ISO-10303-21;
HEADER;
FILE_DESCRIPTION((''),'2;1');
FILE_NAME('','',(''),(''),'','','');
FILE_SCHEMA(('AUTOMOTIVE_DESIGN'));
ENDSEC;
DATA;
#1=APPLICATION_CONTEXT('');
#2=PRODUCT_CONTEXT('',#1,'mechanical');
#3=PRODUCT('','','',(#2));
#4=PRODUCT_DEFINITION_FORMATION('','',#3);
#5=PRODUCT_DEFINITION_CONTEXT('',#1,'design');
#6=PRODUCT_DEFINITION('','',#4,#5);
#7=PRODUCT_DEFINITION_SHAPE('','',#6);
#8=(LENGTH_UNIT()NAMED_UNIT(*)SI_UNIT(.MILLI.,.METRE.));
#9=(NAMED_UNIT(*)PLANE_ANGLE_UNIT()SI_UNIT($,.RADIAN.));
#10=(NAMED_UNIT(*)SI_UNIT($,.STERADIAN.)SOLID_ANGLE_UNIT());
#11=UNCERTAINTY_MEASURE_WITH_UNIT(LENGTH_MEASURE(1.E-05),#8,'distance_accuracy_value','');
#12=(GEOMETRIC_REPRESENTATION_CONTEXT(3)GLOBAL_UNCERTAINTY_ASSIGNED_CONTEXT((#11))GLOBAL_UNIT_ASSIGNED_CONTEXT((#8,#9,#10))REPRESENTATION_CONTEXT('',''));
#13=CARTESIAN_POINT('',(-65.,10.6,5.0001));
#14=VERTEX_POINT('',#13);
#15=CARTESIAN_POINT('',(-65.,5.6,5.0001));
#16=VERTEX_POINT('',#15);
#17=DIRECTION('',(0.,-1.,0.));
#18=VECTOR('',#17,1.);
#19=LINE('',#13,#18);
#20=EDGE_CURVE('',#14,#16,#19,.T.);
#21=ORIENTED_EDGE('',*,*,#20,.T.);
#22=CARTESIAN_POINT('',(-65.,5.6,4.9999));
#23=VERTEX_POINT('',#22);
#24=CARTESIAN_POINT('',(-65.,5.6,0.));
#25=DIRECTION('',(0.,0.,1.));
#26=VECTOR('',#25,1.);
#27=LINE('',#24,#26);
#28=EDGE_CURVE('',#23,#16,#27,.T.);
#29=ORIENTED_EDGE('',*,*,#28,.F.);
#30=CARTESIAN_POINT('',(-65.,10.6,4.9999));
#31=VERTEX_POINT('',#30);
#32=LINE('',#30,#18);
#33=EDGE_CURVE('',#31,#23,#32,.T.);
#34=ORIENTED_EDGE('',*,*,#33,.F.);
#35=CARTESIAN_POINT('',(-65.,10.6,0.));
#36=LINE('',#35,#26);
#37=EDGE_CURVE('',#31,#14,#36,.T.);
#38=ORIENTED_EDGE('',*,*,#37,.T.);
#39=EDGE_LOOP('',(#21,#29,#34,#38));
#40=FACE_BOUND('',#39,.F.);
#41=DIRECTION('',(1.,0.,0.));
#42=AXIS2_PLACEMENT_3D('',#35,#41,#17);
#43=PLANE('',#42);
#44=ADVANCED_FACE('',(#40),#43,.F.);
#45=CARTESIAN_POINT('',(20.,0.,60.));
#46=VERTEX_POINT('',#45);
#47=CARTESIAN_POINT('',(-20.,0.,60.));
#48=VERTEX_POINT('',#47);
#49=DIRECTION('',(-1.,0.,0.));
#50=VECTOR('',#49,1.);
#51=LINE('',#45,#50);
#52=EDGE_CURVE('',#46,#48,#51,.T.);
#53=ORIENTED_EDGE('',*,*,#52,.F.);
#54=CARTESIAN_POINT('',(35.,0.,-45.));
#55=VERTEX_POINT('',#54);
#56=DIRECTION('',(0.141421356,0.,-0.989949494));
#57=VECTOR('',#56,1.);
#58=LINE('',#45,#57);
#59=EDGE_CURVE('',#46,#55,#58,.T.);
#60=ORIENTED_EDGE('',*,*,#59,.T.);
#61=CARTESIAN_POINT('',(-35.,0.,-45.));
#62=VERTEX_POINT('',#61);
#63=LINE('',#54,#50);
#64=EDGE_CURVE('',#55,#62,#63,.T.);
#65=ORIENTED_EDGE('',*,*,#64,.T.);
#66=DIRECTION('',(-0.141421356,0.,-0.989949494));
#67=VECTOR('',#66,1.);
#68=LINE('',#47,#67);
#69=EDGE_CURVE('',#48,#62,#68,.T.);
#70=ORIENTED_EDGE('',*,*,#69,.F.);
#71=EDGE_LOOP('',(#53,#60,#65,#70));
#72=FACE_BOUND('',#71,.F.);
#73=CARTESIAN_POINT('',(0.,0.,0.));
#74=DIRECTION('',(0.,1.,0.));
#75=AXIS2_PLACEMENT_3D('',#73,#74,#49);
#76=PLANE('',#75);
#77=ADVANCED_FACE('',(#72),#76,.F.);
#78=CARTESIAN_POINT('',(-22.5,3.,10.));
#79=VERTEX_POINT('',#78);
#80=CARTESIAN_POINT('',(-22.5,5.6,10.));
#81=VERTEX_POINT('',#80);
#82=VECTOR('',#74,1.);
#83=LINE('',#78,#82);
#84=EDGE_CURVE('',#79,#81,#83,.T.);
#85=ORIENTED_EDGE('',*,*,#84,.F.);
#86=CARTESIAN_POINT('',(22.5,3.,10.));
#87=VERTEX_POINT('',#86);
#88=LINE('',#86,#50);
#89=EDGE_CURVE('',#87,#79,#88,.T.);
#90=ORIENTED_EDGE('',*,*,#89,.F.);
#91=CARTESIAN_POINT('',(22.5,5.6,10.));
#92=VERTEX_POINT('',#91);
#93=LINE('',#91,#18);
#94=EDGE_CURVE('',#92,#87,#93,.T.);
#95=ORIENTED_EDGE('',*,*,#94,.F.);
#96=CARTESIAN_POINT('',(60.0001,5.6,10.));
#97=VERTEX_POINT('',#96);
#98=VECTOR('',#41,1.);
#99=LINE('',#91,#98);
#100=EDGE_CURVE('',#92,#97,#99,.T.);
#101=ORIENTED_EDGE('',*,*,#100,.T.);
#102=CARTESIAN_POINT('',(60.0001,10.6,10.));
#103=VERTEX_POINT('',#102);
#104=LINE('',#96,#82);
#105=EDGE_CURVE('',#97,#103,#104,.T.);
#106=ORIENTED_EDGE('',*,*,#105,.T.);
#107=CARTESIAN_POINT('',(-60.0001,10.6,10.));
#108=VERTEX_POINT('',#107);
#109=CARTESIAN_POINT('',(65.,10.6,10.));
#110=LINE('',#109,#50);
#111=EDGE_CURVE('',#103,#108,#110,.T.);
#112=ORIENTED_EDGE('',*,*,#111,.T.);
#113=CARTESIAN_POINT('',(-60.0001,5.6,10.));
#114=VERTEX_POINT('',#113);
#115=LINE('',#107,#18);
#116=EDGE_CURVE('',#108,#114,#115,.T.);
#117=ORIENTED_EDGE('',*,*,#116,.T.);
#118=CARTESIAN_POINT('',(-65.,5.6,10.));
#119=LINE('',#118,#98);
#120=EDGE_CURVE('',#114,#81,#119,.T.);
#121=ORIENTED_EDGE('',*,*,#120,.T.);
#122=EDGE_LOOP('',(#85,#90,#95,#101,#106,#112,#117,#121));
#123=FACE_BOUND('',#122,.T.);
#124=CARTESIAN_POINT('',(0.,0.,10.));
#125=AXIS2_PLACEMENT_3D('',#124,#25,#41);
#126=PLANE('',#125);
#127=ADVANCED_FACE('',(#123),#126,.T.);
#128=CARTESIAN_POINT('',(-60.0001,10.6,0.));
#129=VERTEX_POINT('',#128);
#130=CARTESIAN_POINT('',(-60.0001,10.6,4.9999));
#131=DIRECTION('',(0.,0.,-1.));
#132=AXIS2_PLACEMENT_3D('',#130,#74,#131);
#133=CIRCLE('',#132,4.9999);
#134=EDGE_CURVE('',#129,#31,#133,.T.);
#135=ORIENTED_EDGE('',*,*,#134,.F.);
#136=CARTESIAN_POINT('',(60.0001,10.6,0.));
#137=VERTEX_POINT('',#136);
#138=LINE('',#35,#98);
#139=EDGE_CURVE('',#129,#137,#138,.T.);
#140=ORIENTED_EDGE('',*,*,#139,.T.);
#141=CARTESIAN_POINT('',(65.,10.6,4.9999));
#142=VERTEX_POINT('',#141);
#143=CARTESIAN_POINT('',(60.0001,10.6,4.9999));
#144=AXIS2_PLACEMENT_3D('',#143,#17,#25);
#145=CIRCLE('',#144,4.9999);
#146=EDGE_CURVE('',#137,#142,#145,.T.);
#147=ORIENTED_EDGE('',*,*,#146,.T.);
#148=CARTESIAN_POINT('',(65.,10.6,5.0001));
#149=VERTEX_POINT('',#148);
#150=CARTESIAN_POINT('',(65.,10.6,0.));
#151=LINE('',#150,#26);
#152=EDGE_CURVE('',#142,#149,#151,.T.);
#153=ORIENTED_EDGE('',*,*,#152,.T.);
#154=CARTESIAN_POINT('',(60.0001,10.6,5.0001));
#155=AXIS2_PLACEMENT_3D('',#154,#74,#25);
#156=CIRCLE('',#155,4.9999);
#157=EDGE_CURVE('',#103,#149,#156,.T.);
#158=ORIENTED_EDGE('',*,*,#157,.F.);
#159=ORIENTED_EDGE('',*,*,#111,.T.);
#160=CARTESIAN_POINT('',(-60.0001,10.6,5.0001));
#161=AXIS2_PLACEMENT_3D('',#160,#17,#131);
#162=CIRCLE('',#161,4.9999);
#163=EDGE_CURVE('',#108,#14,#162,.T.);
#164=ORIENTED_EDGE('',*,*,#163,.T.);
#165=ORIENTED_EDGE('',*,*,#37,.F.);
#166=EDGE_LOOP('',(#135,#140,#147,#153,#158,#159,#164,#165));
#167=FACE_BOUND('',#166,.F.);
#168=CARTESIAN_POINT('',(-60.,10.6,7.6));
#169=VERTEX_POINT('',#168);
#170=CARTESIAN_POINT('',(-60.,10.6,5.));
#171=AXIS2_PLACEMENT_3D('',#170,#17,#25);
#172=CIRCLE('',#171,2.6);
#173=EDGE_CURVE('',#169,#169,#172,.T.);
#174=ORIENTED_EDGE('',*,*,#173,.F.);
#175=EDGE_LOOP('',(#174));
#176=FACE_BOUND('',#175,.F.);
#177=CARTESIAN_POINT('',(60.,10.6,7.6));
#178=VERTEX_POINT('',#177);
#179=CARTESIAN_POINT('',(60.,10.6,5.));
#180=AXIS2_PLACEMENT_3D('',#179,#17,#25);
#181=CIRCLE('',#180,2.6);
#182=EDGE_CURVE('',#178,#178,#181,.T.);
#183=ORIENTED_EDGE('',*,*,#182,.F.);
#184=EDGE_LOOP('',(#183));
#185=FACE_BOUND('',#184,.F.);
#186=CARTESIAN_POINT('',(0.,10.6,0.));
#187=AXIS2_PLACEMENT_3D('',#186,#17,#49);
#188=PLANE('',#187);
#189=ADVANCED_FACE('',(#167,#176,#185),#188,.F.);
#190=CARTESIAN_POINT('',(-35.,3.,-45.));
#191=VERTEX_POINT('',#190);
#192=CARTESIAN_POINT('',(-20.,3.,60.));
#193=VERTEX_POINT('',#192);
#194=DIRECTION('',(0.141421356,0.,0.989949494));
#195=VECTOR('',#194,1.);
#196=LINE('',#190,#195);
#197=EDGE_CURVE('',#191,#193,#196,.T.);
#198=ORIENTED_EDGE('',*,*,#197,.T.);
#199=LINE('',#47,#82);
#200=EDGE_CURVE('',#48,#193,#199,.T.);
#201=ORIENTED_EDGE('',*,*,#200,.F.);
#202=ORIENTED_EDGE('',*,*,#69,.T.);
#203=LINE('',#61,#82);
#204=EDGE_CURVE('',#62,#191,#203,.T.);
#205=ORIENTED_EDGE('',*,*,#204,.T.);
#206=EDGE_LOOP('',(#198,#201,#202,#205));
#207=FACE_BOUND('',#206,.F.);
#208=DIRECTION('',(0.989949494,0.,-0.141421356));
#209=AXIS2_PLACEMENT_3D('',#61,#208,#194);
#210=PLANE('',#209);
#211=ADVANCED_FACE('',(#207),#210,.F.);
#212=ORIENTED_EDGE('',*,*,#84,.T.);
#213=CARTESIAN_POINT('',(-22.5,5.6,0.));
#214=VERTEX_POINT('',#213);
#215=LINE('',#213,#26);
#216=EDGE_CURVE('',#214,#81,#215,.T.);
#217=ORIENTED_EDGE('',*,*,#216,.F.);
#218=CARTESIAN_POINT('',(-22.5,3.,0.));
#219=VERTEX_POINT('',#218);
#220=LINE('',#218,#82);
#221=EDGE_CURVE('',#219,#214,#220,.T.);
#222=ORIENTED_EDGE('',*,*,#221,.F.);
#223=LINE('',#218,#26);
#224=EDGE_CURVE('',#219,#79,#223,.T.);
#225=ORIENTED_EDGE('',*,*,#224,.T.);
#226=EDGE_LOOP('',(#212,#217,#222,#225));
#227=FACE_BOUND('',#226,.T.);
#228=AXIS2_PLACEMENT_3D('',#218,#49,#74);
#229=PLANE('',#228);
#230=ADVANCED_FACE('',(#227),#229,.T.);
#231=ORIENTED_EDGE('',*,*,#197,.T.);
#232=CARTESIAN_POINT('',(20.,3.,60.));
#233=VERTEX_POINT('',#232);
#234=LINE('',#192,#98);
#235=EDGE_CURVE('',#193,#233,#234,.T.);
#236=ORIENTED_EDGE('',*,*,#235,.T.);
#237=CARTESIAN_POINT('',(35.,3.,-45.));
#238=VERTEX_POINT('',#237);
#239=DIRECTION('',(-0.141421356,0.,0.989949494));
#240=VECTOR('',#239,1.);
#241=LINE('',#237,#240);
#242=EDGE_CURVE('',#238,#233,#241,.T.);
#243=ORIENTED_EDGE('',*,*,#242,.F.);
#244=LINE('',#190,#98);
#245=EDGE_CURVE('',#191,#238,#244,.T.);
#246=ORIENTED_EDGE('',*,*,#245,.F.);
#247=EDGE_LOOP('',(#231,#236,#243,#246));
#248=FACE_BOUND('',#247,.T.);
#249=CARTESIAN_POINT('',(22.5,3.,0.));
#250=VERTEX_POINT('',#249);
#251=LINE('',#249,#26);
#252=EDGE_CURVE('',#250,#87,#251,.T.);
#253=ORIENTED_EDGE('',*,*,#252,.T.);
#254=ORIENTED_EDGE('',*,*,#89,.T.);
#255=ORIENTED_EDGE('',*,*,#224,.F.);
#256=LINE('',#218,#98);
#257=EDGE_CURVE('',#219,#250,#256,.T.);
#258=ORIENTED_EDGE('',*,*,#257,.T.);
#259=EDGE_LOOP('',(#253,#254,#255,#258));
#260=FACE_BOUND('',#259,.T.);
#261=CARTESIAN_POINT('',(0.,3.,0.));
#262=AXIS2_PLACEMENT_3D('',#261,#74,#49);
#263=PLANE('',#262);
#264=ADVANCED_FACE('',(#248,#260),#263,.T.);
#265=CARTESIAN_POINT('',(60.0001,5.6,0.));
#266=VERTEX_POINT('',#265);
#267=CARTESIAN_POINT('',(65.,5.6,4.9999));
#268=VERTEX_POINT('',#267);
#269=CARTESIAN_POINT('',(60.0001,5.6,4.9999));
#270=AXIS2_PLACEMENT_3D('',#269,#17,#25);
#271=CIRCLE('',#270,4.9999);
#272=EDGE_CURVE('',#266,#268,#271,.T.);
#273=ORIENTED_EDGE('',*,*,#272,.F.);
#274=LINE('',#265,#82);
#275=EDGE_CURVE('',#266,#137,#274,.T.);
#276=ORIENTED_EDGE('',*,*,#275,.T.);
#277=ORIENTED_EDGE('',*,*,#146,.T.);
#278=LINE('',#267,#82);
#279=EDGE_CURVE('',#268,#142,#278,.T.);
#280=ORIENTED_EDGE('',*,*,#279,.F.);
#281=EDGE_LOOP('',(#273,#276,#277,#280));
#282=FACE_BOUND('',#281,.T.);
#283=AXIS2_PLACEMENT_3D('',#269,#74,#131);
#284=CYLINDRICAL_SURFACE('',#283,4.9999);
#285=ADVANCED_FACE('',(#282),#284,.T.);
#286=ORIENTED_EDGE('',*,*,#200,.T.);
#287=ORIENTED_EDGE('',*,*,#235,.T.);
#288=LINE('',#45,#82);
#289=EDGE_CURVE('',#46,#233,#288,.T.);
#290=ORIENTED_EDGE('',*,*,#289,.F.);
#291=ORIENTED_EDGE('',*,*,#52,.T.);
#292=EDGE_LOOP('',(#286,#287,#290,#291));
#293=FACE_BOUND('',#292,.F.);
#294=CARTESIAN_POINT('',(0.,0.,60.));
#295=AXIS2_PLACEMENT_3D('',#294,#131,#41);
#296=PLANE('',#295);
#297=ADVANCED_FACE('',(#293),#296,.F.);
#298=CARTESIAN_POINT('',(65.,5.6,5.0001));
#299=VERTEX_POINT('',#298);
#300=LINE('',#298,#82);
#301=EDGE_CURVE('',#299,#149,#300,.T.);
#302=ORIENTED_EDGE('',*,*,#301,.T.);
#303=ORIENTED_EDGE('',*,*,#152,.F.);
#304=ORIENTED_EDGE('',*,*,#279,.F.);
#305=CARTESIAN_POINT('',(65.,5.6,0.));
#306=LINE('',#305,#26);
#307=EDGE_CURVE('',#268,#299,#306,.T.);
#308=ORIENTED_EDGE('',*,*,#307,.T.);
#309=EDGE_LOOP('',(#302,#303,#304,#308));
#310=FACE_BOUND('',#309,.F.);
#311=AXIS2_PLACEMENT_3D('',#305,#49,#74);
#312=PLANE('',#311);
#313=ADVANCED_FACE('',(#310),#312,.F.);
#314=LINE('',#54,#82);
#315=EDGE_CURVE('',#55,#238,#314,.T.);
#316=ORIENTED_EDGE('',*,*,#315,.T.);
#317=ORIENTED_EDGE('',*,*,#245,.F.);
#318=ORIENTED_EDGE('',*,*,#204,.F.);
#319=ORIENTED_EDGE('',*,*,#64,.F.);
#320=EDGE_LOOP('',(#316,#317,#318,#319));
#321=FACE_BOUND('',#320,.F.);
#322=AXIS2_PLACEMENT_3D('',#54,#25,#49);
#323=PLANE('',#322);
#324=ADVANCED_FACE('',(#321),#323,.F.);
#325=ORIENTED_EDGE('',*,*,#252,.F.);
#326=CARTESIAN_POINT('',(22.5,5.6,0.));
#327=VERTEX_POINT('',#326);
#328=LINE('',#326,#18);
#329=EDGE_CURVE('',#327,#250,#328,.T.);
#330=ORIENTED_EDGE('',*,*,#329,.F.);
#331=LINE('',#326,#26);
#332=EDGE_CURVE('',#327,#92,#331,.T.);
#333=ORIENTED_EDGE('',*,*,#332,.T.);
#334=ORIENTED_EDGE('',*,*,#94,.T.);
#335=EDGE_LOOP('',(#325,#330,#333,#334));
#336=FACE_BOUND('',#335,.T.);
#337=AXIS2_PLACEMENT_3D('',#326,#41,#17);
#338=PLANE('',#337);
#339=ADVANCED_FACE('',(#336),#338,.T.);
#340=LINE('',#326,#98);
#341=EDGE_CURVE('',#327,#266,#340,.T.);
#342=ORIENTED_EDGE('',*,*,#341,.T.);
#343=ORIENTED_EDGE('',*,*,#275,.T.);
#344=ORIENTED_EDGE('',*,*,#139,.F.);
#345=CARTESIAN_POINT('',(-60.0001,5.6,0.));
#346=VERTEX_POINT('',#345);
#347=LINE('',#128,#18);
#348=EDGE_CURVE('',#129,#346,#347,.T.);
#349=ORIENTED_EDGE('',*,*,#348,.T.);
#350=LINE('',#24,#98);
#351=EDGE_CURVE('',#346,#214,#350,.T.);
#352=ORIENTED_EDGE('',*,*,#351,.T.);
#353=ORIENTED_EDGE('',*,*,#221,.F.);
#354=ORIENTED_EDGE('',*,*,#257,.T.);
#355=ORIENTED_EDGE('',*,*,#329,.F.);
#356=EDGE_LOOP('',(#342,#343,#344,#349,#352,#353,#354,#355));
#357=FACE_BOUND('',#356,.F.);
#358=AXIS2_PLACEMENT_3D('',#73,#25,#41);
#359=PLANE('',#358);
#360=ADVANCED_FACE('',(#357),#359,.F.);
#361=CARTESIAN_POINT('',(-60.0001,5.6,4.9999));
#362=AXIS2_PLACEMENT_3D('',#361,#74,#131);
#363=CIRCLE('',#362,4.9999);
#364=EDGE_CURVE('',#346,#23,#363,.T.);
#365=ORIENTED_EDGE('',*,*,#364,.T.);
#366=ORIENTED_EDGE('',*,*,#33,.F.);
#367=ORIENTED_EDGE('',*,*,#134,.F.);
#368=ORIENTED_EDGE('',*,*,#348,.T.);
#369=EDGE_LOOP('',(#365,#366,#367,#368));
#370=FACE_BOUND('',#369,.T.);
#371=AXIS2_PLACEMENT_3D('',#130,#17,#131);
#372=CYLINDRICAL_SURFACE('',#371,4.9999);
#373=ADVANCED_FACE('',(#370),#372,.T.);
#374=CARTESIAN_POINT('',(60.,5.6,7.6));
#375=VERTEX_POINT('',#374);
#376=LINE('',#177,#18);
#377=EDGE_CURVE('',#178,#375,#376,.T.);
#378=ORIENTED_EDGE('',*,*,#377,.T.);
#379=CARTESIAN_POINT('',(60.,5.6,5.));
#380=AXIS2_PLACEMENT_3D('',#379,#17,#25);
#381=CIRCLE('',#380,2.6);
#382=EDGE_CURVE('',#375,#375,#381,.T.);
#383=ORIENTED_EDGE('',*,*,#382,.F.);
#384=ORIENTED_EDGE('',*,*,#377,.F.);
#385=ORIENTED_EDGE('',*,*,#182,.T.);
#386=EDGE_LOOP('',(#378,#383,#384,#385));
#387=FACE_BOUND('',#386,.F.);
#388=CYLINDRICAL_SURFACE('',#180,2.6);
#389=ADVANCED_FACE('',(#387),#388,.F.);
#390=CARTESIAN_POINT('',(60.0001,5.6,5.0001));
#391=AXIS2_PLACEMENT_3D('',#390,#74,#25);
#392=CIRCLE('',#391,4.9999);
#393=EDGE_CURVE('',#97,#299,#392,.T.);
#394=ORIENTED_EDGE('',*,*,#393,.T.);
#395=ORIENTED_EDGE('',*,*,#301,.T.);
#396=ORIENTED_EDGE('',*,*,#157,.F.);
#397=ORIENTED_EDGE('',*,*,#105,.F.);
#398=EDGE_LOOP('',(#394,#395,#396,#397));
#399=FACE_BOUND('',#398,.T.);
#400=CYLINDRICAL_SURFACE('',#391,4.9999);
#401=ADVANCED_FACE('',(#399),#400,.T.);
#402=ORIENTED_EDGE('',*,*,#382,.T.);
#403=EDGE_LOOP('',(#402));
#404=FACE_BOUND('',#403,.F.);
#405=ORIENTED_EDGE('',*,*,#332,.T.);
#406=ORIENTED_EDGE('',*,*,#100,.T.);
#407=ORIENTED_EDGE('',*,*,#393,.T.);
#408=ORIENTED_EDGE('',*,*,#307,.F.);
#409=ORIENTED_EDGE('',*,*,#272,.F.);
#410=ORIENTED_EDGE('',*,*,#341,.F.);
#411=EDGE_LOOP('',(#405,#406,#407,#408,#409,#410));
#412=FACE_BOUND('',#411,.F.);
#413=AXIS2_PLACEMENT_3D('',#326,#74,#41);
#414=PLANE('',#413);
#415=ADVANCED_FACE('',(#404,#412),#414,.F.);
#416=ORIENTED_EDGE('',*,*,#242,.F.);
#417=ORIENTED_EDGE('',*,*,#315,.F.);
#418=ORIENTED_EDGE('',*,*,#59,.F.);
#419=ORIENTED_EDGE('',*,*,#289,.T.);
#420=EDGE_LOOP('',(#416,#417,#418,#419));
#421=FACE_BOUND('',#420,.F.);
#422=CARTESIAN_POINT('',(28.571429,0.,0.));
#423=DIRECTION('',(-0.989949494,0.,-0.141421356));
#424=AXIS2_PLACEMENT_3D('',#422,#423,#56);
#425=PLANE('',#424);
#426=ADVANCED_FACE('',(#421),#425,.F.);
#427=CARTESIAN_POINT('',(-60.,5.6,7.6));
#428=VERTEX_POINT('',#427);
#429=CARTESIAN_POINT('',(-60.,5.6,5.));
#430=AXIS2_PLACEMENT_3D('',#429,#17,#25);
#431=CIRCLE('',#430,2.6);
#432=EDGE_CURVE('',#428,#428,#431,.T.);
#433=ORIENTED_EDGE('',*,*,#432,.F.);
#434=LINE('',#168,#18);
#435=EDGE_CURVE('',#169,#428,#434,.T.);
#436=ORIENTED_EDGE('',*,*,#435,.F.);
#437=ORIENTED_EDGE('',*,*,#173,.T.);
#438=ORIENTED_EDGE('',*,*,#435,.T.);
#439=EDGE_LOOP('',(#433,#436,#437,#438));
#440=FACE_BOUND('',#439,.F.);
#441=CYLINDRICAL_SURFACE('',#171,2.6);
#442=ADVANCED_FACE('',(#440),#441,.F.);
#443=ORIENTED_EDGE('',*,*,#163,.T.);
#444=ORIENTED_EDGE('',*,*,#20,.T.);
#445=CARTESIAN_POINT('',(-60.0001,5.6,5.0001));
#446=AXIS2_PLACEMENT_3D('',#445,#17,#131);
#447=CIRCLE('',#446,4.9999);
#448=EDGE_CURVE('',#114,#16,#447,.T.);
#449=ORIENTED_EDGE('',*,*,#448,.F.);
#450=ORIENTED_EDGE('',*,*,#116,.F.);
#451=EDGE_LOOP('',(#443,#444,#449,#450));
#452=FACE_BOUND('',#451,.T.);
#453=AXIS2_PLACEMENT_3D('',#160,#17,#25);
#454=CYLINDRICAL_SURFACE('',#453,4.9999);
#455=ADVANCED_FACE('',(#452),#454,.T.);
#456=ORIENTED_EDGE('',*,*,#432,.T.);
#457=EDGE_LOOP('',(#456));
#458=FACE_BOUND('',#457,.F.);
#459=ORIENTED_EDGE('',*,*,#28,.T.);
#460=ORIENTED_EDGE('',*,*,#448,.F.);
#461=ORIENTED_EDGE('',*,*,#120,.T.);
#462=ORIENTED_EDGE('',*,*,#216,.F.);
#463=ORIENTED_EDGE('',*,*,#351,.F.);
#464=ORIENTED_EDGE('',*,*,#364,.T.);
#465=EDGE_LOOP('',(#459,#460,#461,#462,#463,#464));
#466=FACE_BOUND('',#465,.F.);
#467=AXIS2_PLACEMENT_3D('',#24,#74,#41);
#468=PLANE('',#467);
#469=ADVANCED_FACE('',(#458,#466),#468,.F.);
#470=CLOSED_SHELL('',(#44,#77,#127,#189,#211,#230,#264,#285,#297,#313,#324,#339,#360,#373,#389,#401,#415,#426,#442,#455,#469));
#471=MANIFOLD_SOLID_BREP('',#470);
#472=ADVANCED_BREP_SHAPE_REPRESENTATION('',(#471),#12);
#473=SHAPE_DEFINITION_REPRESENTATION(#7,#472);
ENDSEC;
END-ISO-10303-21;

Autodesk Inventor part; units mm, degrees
ref_plane "YZ Plane" through (0, 0, 0) normal (1, 0, 0) x (0, 1, 0)
ref_plane "XZ Plane" through (0, 0, 0) normal (0, 1, 0) x (-1, 0, 0)
ref_plane "XY Plane" through (0, 0, 0) normal (0, 0, 1) x (1, 0, 0)
sketch "Sketch1" plane through (0, 0, 0) normal (0, 1, 0) x (-1, 0, 0)
  line L0 (0, -66) -> (0, 81) projected
  line L1 (-49, 0) -> (49, 0) projected
  line L2 (-35, -45) -> (35, -45)
  line L3 (20, 60) -> (-20, 60)
  line L4 (-20, 60) -> (-35, -45)
  line L5 (35, -45) -> (20, 60)
  point P0 (0, 0)
  dimension "d0" = 70
  dimension "d1" = 105
  dimension "d3" = 40
  dimension "d6" = 45
extrude "Extrusion1" add sketch "Sketch1" along normal blind 3
sketch "Sketch2" plane through (0, 0, 0) normal (0, 0, 1) x (1, 0, 0)
  line L0 (-91, 0) -> (91, 0) projected
  line L1 (0, 12.72) -> (0, -2.12) projected
  line L2 (35, 3) -> (-35, 3) projected
  line L3 (22.5, 3) -> (-22.5, 3)
  line L4 (-22.5, 3) -> (-22.5, 5.6)
  line L5 (22.5, 5.6) -> (22.5, 3)
  line L6 (22.5, 5.6) -> (65, 5.6)
  line L7 (65, 5.6) -> (65, 10.6)
  line L8 (65, 10.6) -> (-65, 10.6)
  line L9 (-65, 10.6) -> (-65, 5.6)
  line L10 (-65, 5.6) -> (-22.5, 5.6)
  line L11 (-35, 0) -> (-35, 3) projected
  line L12 (35, 0) -> (35, 3) projected
  point P0 (0, 0)
  point P1 (-22.5, 3)
  point P2 (22.5, 3)
  dimension "d8" = 2.6
  dimension "d9" = 130
  dimension "d10" = 5
  dimension "d11" = 2.6
  dimension "d22" = 45
extrude "Extrusion2" add sketch "Sketch2" along normal blind 10 contours L2 L4 L10 L9 L8 L1 | L1 L8 L7 L6 L5 L2
fillet "Fillet1" radius 5 4 edges at (65, 8.1, 0) (65, 8.1, 10) (-65, 8.1, 0) (-65, 8.1, 10)
sketch "Sketch3" plane through (-60, 10.6, 0) normal (0, 1, 0) x (1, 0, 0)
  arc A0 (0, 0) -> (0, -10) centre (0, -5) ccw projected
  arc A1 (120, -10) -> (120, 0) centre (120, -5) ccw projected
  point P0 (60, 0)
hole "Hole1" at (60, 10.6, 5) at (-60, 10.6, 5) direction (0, -1, 0) diameter 5.2 end through all
properties part number "karoserie2"
